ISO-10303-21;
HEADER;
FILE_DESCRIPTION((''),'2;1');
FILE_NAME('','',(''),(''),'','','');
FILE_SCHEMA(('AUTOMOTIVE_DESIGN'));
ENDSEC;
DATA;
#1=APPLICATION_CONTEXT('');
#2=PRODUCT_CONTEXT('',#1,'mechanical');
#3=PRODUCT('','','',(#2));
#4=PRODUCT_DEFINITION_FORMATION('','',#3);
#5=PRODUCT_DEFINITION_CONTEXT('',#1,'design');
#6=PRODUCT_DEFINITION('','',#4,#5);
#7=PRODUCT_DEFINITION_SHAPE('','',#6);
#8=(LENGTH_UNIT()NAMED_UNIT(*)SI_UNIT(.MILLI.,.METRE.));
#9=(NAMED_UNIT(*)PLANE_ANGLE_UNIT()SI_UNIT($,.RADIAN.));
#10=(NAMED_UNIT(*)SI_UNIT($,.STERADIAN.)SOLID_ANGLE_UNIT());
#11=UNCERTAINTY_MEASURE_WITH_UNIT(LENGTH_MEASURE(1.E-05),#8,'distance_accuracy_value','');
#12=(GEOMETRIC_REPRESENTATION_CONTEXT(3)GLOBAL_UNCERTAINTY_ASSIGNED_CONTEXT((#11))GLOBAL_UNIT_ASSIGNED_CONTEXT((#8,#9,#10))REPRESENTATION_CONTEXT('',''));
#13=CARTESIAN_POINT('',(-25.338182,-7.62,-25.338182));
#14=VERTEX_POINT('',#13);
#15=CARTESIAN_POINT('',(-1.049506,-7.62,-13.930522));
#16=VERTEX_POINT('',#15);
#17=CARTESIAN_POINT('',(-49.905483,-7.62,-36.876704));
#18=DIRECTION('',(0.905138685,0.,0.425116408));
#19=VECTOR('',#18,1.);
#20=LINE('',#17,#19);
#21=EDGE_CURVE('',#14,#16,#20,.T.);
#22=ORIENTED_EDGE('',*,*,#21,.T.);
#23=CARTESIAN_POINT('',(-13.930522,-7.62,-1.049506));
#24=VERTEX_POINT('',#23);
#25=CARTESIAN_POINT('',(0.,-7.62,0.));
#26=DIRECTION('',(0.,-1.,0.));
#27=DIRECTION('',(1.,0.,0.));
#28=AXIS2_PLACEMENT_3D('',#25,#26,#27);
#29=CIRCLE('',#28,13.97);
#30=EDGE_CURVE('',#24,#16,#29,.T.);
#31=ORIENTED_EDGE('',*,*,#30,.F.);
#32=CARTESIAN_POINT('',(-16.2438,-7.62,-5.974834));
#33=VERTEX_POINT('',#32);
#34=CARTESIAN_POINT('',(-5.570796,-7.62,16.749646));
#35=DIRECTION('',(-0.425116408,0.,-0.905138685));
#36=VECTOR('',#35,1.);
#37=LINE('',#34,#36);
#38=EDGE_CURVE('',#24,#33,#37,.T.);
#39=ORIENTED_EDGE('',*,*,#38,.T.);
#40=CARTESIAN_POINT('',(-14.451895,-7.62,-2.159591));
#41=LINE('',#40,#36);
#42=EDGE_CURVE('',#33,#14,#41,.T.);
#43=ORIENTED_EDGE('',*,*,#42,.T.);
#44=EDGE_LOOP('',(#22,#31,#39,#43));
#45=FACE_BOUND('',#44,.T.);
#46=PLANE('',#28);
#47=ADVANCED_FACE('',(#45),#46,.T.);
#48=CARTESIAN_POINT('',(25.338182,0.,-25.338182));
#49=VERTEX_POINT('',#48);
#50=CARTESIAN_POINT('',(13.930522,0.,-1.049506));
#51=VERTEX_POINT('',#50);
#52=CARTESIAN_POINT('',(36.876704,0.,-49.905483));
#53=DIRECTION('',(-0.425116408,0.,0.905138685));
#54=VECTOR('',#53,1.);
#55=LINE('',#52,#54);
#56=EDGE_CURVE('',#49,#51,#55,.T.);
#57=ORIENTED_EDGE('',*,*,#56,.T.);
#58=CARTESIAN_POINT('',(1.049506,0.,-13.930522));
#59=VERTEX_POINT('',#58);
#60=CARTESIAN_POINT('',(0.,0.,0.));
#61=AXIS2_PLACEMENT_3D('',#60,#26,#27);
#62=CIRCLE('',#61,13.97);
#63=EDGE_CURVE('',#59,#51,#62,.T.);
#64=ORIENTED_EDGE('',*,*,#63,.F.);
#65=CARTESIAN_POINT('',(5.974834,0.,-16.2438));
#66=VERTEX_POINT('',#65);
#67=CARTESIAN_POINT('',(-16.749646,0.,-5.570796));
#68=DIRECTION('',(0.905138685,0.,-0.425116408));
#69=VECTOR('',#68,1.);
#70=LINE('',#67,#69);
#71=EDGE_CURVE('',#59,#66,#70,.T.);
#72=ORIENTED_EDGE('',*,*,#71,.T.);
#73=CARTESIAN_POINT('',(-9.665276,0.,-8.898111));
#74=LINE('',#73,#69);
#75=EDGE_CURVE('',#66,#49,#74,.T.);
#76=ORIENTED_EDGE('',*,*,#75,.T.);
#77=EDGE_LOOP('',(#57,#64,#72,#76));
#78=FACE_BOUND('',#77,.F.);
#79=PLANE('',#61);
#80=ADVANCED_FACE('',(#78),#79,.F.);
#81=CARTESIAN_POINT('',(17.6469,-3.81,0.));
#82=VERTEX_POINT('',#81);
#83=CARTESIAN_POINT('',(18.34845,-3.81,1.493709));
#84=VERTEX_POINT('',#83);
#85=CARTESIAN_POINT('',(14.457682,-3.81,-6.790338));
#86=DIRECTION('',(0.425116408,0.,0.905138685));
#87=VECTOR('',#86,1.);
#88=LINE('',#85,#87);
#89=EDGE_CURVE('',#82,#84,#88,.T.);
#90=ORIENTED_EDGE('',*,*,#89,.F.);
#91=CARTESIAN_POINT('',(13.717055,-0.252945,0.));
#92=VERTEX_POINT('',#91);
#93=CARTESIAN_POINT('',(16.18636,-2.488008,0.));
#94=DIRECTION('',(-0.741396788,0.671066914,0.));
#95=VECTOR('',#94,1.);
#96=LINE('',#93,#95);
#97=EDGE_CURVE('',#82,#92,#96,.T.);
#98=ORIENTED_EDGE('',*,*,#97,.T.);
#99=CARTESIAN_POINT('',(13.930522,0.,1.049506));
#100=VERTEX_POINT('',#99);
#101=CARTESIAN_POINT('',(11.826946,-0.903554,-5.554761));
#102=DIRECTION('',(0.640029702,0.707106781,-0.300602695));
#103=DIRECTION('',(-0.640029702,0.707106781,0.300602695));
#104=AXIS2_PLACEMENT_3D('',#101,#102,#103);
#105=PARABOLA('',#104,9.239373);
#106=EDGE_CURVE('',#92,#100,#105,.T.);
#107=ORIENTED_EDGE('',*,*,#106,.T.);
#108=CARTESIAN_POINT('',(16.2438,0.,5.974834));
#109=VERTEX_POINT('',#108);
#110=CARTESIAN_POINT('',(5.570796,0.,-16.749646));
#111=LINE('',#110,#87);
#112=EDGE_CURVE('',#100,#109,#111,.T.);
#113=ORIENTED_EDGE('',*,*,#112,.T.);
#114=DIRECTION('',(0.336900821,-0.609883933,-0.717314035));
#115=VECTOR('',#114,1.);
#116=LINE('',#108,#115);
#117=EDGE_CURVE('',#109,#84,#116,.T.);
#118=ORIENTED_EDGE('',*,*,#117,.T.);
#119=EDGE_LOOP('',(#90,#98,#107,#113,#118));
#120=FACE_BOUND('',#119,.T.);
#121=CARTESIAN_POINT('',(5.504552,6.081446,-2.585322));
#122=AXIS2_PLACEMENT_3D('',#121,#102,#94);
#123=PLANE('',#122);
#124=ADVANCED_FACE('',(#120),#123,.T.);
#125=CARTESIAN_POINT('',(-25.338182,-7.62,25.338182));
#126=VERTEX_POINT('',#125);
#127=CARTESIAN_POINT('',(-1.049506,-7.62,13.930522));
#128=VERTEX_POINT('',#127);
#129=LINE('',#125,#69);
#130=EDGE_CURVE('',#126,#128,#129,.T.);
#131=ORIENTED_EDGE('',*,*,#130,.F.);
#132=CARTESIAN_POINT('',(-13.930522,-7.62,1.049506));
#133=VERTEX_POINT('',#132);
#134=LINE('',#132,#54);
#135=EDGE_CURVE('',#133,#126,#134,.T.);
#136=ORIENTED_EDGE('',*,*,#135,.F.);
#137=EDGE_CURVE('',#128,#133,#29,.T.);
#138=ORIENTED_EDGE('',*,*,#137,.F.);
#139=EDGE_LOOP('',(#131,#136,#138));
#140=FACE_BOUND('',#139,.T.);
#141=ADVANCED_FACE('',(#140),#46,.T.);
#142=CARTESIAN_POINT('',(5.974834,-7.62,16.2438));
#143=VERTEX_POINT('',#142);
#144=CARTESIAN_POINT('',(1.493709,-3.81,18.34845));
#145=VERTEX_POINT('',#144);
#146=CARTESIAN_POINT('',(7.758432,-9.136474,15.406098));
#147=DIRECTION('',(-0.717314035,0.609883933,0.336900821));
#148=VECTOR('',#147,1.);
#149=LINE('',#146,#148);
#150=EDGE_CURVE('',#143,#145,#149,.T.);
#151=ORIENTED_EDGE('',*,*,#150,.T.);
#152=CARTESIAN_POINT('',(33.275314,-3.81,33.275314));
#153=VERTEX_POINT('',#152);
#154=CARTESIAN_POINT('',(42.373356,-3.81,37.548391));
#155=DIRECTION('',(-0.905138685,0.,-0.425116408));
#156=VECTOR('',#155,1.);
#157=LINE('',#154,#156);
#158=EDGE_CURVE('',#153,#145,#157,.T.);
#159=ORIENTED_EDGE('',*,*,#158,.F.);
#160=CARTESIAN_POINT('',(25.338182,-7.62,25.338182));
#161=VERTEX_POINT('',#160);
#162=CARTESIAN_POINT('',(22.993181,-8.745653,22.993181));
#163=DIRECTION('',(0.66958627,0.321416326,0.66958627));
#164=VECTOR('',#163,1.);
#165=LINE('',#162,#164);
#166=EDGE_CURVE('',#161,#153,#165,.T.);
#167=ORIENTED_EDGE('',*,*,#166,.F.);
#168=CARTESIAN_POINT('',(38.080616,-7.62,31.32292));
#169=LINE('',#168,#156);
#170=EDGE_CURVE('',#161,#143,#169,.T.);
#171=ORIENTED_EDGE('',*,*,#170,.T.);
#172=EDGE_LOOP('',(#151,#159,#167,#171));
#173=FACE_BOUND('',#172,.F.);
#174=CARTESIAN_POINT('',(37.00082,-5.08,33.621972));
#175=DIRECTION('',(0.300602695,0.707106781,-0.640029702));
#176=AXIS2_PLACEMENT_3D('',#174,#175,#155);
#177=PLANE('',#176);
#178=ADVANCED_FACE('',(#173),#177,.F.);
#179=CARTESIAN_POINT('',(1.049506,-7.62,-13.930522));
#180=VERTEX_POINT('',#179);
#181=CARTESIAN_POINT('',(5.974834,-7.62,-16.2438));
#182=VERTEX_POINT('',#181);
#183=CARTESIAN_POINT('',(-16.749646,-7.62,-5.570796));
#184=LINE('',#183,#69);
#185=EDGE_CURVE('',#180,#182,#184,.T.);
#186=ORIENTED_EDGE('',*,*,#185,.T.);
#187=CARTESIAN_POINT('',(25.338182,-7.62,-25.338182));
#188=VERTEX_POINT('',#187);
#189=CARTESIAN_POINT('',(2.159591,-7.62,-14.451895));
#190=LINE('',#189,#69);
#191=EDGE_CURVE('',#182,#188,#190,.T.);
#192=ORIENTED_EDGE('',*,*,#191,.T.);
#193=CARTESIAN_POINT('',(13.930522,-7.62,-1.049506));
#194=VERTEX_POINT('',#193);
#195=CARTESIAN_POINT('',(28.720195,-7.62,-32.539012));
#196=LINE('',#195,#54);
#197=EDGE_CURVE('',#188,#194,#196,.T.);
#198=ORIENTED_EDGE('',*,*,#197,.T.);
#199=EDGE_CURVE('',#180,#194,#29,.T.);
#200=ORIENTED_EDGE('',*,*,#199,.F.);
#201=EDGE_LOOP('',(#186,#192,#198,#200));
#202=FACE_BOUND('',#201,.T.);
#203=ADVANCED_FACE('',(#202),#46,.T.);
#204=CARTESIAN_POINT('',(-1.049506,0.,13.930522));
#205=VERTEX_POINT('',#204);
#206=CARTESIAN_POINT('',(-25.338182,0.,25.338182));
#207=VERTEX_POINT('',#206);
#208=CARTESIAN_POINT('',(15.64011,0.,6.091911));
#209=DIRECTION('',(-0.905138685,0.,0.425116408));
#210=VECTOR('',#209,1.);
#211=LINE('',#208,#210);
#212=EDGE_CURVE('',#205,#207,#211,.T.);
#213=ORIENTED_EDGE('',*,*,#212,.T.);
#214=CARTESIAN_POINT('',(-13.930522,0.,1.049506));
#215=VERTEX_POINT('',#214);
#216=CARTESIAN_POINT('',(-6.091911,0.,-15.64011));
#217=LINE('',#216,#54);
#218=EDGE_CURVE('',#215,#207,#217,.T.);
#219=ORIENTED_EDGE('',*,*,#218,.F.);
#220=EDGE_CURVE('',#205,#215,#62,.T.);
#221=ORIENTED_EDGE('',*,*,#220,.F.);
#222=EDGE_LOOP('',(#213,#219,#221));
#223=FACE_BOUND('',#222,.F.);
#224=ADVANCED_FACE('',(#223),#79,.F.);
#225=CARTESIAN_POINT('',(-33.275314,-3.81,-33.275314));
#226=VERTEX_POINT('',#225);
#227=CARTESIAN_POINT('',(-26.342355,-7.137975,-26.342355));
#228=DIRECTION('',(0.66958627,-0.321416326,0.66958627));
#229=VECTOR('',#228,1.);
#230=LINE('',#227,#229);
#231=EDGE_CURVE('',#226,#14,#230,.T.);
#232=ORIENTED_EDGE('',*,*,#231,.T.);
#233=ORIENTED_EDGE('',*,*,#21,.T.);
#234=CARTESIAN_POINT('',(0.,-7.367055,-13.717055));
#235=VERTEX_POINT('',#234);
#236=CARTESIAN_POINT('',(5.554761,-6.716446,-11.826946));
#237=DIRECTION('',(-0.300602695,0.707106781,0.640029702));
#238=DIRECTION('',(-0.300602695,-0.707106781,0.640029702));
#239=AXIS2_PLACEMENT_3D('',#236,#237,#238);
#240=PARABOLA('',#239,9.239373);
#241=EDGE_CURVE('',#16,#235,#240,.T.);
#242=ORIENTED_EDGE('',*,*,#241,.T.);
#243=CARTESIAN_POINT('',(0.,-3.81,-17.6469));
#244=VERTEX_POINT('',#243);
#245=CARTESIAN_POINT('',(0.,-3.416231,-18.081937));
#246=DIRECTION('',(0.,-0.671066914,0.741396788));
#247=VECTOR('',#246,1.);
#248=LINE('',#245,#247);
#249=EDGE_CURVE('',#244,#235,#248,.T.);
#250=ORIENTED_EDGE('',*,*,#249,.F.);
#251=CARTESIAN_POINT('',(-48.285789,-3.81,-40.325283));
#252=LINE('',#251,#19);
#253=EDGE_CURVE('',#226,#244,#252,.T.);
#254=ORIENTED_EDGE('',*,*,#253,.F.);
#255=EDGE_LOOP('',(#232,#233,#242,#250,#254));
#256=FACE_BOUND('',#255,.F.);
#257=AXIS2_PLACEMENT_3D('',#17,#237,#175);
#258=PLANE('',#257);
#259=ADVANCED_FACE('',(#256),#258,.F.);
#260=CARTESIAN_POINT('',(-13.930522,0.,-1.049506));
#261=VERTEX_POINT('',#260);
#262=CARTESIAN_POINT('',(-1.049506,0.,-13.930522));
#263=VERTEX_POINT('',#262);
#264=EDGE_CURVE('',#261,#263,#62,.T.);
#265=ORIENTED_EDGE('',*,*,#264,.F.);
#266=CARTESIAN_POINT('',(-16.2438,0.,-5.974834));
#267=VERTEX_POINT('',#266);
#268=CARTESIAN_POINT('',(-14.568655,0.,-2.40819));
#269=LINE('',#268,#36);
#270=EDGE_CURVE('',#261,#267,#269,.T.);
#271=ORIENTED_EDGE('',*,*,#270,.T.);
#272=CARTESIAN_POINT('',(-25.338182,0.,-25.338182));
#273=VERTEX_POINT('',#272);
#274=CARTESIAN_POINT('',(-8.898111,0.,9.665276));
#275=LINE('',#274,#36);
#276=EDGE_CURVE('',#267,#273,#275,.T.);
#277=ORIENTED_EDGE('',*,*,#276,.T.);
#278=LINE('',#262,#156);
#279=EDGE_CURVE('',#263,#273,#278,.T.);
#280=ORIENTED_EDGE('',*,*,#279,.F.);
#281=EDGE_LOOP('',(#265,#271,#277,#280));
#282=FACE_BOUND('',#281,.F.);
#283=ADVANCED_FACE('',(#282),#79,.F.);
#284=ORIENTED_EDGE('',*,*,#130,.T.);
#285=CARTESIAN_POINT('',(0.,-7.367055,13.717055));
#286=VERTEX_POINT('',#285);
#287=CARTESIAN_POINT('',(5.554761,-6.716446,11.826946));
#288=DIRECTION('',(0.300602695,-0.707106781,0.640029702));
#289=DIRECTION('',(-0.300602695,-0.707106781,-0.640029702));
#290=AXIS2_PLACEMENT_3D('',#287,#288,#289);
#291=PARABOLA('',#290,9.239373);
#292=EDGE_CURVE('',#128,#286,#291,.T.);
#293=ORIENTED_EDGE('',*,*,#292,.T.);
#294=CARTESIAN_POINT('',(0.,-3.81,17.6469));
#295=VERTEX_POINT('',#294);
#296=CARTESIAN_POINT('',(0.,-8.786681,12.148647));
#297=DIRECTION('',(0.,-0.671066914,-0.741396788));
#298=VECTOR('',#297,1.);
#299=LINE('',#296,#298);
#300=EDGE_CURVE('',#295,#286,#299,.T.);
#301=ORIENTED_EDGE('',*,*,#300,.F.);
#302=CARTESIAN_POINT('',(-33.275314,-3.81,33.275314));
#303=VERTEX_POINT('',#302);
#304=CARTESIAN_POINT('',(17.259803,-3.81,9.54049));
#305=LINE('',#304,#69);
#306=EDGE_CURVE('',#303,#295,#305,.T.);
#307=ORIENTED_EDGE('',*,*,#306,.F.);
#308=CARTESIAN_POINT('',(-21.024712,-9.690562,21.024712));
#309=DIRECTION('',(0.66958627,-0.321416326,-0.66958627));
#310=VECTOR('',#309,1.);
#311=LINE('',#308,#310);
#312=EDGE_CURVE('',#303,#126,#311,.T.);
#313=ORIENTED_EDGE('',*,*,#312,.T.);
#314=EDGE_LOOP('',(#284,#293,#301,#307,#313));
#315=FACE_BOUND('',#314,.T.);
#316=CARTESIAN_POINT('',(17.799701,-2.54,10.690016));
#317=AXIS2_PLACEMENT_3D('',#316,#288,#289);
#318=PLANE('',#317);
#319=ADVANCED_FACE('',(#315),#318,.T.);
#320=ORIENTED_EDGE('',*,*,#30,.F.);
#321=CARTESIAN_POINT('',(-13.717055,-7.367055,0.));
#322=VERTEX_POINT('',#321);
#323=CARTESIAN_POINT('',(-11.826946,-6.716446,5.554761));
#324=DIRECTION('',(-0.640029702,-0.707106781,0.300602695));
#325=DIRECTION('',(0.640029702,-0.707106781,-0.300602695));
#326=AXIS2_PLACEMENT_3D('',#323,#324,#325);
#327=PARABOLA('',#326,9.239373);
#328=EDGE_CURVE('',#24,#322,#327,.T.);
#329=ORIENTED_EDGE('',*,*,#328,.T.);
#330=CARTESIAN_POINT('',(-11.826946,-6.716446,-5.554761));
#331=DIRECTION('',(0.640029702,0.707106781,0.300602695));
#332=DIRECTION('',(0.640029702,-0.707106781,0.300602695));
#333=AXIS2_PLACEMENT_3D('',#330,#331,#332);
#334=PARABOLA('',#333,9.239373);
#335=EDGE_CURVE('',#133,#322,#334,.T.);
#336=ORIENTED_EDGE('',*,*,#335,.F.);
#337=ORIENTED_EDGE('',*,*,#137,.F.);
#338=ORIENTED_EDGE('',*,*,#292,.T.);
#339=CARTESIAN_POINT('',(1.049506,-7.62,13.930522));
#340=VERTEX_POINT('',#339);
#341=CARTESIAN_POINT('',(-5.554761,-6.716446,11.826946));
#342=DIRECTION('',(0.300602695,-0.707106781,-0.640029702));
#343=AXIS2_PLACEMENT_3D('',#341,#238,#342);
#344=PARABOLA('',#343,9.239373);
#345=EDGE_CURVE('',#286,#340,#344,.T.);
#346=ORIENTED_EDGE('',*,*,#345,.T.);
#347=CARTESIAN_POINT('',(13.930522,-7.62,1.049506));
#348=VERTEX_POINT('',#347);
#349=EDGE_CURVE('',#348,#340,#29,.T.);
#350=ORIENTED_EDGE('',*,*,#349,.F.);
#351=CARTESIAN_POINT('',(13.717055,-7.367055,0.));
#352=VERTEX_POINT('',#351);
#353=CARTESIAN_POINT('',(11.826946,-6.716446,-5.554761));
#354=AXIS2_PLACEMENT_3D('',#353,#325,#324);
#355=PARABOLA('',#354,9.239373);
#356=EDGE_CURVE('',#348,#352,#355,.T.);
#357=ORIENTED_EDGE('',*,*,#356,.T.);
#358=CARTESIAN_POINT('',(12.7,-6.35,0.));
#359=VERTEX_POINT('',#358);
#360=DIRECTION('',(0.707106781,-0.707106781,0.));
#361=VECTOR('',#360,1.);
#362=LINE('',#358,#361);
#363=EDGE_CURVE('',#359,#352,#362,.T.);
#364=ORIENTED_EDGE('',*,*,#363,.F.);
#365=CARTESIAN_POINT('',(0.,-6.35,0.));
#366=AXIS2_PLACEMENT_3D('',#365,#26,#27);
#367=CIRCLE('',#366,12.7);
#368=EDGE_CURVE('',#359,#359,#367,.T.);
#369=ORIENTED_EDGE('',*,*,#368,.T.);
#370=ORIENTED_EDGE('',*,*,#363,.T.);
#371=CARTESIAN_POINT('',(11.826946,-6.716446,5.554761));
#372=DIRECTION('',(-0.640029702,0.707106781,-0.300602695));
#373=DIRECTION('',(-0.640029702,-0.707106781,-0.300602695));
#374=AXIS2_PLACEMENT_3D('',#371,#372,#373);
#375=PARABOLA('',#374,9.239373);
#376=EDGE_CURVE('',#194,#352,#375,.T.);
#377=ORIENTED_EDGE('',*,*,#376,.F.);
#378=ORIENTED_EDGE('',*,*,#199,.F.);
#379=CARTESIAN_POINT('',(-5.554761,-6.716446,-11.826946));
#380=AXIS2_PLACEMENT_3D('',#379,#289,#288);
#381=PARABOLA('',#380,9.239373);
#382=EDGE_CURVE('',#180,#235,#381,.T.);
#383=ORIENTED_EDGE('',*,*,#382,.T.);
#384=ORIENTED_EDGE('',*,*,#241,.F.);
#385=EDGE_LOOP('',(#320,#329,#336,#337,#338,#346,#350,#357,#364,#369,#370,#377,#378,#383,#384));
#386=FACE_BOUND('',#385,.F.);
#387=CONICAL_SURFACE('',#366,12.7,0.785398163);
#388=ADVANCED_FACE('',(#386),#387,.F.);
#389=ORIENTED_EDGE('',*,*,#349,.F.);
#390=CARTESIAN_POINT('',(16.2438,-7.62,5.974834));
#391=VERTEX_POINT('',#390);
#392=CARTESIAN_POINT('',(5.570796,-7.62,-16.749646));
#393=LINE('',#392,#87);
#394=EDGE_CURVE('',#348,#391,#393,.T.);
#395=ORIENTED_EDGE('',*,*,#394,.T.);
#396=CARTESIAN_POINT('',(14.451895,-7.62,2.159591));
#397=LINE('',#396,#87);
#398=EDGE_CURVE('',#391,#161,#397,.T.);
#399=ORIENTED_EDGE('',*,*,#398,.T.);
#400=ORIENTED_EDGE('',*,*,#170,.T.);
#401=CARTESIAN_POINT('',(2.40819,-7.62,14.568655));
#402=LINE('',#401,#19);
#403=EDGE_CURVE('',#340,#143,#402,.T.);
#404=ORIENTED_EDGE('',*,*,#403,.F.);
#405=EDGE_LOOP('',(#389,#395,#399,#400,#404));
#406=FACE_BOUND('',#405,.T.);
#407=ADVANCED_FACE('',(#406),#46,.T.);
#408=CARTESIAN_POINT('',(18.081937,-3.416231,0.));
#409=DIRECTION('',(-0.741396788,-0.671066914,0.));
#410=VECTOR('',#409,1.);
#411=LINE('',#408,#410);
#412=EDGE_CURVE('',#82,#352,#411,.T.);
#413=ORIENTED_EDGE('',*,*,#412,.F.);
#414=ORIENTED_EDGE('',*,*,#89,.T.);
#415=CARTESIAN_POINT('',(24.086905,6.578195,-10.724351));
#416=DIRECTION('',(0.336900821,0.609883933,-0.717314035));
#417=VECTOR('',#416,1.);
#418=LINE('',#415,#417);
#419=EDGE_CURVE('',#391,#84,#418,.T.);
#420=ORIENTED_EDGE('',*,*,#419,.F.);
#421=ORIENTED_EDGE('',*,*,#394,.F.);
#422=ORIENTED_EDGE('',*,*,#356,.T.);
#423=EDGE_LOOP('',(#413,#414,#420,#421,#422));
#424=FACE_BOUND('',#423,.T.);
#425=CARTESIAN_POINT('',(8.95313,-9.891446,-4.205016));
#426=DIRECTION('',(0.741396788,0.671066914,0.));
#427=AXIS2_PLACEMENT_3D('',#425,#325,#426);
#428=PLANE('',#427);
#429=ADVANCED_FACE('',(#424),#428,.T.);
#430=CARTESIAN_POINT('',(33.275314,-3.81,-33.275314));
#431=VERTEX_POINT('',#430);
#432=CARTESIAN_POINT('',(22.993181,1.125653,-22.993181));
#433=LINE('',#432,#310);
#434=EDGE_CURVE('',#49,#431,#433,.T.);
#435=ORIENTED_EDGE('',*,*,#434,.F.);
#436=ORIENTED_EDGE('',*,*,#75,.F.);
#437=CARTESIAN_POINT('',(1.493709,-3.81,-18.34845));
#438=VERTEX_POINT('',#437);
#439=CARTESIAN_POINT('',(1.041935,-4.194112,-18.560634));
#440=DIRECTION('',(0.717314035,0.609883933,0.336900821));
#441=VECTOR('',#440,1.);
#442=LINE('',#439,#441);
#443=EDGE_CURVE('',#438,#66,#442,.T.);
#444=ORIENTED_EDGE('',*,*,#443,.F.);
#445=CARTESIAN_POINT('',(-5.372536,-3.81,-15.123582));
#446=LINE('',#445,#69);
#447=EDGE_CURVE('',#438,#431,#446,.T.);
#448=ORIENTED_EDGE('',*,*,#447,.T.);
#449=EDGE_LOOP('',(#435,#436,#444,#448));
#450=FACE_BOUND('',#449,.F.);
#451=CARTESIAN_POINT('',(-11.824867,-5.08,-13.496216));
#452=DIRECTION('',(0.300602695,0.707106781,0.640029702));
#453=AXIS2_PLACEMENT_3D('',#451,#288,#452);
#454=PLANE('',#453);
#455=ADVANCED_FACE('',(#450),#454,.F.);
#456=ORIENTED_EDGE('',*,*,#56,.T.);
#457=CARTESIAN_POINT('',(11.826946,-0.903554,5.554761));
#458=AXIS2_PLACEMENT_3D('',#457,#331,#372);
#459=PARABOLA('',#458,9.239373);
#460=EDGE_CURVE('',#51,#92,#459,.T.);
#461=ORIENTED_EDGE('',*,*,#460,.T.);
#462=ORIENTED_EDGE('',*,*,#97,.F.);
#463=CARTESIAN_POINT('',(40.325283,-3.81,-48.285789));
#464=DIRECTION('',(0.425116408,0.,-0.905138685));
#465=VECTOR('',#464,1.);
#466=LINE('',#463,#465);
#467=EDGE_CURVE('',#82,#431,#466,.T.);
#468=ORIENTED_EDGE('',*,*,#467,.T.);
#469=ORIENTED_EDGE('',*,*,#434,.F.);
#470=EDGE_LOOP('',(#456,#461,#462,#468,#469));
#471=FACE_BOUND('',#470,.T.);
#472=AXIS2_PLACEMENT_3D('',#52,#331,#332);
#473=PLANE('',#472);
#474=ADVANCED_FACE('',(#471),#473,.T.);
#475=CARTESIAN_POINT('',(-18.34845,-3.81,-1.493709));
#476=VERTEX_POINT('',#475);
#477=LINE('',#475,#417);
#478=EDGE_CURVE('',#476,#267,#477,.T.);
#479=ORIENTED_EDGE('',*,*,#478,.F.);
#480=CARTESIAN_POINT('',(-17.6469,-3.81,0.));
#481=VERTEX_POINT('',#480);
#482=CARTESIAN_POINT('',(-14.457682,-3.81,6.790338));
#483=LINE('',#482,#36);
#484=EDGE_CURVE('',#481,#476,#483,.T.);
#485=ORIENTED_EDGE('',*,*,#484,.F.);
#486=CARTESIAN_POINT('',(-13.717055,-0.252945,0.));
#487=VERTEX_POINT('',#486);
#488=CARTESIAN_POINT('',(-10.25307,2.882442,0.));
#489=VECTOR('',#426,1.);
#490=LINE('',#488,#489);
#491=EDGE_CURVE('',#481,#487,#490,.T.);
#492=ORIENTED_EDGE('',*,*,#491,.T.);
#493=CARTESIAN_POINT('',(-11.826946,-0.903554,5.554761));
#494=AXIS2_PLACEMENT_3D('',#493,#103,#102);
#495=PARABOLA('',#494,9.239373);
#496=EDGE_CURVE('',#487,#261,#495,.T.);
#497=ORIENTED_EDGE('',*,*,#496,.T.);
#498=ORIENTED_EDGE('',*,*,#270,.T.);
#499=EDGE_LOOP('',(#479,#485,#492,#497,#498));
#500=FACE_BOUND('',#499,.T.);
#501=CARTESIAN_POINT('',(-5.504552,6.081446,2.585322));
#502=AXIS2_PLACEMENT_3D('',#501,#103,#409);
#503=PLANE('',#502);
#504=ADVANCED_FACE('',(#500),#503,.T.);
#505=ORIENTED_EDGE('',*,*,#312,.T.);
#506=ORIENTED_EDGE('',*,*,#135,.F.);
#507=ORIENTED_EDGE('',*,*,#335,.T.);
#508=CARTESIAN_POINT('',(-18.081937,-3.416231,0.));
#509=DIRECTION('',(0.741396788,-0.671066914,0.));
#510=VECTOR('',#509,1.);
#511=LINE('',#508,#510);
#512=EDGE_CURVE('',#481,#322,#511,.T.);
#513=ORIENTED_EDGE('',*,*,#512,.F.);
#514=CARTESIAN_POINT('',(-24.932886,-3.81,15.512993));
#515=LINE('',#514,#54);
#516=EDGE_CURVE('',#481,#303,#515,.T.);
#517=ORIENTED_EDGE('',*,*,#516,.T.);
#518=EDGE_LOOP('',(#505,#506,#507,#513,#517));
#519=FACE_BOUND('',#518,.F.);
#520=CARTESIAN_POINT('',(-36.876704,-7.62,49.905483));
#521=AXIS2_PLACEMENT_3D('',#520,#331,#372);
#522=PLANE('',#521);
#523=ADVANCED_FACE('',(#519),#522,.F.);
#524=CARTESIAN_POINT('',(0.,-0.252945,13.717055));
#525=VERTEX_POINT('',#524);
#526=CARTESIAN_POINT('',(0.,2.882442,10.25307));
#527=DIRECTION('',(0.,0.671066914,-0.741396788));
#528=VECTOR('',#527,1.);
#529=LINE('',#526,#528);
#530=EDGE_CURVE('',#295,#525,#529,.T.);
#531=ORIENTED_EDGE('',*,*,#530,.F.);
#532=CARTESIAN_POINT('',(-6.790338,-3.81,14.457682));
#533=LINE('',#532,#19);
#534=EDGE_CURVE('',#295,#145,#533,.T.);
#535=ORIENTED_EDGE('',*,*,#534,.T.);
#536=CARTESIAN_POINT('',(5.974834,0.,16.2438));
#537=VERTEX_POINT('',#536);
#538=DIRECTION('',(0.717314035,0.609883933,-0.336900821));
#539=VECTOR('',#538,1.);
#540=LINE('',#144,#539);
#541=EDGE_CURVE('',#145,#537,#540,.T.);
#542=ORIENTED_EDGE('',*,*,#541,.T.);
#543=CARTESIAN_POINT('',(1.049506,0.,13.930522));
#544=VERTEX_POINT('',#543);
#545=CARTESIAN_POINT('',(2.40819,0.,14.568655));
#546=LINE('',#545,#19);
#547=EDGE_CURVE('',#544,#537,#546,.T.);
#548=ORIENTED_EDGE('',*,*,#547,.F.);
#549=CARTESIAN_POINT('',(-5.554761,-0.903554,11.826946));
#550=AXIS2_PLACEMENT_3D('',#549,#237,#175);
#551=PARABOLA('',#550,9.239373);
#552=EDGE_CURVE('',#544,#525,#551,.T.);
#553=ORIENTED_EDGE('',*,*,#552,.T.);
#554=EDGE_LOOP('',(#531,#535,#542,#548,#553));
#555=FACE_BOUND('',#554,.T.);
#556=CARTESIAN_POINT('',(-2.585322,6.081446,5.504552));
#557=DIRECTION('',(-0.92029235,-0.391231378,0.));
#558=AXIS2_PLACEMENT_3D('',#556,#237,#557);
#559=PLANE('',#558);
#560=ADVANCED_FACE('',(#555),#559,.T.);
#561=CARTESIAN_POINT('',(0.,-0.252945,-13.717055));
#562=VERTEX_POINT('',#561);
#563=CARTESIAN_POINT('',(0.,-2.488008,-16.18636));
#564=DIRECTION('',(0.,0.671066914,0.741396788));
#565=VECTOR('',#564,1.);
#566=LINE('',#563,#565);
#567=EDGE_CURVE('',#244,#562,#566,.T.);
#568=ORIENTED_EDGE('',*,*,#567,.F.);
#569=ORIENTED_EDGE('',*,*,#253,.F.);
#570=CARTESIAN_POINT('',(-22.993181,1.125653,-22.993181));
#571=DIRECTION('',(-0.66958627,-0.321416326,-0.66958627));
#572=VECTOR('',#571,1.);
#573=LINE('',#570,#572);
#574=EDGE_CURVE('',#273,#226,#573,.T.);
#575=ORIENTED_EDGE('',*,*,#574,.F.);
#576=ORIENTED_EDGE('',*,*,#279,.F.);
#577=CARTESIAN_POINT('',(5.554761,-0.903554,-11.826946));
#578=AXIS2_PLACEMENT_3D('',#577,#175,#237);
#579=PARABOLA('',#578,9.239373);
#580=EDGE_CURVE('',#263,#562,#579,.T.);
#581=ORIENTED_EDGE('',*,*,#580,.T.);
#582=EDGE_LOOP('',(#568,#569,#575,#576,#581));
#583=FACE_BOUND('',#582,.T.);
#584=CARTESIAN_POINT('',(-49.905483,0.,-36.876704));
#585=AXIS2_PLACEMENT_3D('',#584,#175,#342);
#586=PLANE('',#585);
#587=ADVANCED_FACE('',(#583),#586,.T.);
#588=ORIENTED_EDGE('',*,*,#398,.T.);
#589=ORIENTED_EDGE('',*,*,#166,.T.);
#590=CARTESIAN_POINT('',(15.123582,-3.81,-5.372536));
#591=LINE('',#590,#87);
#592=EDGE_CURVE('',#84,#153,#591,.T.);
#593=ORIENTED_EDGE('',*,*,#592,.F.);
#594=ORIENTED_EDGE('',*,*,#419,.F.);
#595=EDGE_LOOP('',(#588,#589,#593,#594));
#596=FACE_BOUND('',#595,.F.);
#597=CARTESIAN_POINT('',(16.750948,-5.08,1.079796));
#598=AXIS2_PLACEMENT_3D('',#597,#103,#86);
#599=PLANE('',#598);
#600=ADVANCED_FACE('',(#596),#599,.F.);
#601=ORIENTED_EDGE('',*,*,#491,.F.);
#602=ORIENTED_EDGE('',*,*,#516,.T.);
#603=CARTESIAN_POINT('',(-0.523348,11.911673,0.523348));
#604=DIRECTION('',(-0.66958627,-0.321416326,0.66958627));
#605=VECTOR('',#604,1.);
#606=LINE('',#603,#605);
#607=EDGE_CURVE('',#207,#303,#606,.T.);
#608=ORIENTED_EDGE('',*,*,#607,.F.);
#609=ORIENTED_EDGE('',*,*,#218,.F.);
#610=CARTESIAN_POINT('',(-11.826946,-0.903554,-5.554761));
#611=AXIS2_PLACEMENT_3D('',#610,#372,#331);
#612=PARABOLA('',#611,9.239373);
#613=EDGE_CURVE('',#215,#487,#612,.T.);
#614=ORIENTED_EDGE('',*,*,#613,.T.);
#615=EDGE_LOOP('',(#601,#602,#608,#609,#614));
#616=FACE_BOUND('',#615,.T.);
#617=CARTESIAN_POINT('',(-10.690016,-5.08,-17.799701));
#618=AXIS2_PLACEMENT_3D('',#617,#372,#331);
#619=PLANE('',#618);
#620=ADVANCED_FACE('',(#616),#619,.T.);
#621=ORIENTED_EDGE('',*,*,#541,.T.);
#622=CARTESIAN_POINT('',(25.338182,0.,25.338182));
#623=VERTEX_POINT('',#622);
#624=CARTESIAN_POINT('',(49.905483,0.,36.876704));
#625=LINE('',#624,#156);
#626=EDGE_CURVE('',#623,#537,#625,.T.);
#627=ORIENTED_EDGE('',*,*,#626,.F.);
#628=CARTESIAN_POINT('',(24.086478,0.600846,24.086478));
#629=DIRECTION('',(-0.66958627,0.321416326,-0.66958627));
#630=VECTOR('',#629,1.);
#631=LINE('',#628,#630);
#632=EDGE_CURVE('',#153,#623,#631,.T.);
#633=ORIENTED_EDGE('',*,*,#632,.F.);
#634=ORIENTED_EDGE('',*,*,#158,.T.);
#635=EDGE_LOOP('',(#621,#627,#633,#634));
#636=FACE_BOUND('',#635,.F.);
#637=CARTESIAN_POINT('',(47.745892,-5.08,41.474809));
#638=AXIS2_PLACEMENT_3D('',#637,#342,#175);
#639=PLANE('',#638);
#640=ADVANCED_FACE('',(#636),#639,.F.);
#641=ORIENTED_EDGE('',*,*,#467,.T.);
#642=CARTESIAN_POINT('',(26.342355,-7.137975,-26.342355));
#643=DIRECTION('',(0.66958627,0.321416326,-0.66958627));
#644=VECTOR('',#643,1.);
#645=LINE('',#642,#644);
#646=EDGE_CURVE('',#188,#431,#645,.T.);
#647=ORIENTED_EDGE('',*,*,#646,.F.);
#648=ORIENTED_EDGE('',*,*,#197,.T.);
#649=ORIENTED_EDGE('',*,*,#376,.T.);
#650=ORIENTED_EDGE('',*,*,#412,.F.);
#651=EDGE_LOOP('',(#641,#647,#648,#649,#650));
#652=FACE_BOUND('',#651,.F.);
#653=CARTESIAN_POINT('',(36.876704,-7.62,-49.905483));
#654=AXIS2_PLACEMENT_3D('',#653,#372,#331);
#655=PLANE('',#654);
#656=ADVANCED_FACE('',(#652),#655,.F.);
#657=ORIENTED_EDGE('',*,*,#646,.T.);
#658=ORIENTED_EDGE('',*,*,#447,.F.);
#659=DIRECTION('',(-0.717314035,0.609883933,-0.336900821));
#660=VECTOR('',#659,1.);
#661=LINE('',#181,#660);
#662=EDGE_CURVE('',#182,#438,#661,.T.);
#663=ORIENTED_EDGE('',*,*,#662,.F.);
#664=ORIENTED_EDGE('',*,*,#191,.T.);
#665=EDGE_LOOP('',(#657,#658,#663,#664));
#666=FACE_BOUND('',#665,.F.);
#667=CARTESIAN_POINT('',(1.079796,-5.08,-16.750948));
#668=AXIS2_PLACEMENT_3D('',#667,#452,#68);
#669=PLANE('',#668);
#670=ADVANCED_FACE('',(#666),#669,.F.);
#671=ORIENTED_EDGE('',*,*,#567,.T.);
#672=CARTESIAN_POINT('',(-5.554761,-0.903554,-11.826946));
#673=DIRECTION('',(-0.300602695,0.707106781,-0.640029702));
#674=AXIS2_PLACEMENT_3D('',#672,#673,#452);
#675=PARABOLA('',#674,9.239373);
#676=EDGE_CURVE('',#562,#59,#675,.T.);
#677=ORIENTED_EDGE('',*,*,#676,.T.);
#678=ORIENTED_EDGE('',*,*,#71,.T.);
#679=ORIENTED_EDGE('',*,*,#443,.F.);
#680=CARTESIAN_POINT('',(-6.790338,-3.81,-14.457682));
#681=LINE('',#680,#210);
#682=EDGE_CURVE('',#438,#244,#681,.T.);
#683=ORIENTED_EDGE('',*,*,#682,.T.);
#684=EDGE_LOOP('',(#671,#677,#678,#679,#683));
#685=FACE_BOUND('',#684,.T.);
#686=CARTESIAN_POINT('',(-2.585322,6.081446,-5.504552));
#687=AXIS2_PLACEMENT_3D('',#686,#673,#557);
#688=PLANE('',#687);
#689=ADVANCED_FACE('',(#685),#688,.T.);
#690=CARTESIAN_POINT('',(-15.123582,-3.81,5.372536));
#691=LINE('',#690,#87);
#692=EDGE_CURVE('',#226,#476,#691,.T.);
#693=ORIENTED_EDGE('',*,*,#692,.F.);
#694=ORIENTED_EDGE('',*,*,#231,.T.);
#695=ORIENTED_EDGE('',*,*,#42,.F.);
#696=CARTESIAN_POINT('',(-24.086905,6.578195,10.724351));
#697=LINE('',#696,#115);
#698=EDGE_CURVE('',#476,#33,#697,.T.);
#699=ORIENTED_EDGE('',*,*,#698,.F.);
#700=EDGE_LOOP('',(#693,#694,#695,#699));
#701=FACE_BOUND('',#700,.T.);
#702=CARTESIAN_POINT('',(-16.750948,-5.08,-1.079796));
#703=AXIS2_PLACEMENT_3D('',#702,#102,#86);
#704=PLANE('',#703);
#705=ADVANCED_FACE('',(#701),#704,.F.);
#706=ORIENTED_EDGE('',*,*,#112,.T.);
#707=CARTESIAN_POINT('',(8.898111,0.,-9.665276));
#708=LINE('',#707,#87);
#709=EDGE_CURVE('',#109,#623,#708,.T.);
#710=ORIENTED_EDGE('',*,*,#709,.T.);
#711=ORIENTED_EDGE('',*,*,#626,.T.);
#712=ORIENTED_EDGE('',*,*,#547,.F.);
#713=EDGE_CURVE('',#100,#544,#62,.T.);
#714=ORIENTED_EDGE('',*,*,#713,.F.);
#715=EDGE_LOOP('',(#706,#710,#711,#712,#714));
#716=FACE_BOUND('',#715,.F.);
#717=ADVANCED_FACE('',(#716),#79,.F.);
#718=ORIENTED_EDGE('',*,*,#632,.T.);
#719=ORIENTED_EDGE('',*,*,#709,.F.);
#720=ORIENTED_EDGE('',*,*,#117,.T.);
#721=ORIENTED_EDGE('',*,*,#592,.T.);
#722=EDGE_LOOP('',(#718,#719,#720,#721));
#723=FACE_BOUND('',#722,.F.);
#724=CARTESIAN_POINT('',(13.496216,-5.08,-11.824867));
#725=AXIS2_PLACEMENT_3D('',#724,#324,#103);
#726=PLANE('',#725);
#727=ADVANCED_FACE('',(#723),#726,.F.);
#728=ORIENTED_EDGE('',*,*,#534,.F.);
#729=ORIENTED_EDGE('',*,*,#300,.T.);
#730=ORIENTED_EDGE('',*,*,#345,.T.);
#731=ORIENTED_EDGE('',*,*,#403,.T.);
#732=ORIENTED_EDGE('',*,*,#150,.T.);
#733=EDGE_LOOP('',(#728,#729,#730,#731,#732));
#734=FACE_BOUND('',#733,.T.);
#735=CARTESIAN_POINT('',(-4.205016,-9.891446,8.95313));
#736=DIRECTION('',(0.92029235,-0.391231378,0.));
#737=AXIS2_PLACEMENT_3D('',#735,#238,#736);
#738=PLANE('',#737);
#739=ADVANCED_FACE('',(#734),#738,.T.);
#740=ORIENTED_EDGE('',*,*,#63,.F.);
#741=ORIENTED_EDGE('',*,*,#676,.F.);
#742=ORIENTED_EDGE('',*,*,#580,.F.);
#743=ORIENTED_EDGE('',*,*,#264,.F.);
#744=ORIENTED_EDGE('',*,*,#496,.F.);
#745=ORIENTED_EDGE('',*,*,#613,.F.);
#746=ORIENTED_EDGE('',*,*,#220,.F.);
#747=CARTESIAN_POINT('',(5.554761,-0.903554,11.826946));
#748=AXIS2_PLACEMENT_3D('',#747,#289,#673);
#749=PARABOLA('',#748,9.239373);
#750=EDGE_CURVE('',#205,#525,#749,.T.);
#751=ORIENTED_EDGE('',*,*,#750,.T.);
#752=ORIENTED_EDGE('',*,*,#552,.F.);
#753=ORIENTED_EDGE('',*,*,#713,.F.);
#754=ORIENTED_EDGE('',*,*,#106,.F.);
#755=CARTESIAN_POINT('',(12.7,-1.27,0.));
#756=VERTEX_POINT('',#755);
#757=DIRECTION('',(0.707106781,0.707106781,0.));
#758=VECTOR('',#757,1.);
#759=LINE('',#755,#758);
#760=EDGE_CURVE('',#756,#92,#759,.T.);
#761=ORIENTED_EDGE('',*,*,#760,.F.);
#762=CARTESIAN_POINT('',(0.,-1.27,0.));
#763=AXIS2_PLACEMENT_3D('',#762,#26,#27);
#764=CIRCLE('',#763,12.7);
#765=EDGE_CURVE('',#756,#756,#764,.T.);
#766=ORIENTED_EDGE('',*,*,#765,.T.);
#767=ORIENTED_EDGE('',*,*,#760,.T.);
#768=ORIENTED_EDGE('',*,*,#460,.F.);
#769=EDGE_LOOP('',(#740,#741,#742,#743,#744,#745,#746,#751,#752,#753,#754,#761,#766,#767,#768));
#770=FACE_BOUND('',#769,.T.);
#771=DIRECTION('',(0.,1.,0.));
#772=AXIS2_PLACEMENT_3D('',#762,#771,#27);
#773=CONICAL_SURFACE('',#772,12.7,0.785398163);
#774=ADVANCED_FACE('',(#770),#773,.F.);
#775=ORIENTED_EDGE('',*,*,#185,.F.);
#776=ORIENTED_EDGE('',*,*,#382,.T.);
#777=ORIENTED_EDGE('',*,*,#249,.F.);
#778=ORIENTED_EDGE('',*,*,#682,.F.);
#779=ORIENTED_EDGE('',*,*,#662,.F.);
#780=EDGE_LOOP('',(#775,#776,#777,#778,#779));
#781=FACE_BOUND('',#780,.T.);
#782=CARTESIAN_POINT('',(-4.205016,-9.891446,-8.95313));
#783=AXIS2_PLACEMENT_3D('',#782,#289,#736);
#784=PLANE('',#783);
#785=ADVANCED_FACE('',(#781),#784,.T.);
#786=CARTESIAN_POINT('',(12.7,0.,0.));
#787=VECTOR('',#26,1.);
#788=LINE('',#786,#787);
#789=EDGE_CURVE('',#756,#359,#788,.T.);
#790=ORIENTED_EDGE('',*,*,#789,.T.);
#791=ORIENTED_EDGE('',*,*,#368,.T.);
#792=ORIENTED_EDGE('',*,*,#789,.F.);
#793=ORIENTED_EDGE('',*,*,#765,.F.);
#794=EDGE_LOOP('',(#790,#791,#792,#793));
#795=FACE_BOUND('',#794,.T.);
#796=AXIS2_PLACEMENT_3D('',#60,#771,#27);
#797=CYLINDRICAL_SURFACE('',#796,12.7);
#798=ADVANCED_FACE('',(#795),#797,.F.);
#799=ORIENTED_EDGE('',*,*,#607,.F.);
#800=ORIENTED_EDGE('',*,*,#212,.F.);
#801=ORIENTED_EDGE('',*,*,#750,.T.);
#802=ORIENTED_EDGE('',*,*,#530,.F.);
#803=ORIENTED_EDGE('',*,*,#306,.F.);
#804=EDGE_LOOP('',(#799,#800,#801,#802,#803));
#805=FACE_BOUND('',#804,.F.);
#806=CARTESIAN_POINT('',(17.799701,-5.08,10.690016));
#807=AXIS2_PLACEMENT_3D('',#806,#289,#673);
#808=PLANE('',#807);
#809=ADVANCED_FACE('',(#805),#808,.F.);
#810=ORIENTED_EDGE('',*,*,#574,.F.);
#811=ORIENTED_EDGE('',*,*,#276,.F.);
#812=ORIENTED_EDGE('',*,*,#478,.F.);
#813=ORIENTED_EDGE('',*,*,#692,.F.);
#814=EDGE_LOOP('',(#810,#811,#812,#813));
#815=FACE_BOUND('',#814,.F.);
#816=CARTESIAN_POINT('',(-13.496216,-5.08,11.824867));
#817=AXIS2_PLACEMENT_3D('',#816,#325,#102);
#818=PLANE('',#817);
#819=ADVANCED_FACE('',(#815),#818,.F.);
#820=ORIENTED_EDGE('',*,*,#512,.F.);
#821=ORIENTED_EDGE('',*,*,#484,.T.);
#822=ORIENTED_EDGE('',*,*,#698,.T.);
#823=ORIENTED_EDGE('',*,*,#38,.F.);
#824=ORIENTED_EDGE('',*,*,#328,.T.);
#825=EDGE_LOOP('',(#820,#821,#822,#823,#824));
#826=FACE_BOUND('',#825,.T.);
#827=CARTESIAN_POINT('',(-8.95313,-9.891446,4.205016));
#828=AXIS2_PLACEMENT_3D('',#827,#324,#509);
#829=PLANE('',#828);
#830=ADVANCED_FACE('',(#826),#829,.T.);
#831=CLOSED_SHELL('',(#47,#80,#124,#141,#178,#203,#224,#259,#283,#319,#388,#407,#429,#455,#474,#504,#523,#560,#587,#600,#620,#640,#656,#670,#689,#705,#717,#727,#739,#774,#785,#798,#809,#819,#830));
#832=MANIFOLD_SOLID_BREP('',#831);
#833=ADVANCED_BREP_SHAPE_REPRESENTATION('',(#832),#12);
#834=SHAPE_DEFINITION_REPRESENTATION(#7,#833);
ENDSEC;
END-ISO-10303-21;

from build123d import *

# Parameters (mm, degrees)
F0_R          = 12.7
F1_DEPTH      = 7.62
F2_SIZE       = 1.27
F3_SIZE       = 1.27
F4_SIZE       = 5.08
F5_T4_DEPTH   = 65.8139573625
F6_SIZE       = 5.08
F7_T4_DEPTH   = 57.8584590231
F8_T4_DEPTH   = 72.4149723957
F8_T10_DEPTH  = 72.4149723957
F8_T16_DEPTH  = 72.4149723957
F9_T4_DEPTH   = 72.4149723957
F10_SIZE      = 5.08
F11_T4_DEPTH  = 57.8584590231
F12_T4_DEPTH  = 72.4149723957
F12_T10_DEPTH = 72.4149723957
F12_T16_DEPTH = 72.4149723957
F13_T4_DEPTH  = 72.4149723957
F14_SIZE      = 5.08
F15_T4_DEPTH  = 57.8584590231
F16_T4_DEPTH  = 72.4149723957
F16_T10_DEPTH = 72.4149723957
F16_T16_DEPTH = 72.4149723957
F17_T4_DEPTH  = 72.4149723957
F18_T4_DEPTH  = 64.4594740563
F18_T10_DEPTH = 64.4594740563
F18_T16_DEPTH = 64.4594740563
F19_T4_DEPTH  = 64.4594740563


# Not quite as in the source:
# - a fillet or chamfer that OpenCascade refuses, or shapes differently, is made with other operations: its cross-section is extruded or revolved along the edge and cut away or added


with BuildPart() as f1:
    # F0 (on Front) → F1 (new body)
    with BuildSketch(Plane.XZ):
        Polygon((-19.05, 0), (-35.9210244843, -35.9210244843), (0, -19.05), (35.9210244843, -35.9210244843), (19.05, 0), (35.9210244843, 35.9210244843), (0, 19.05), (-35.9210244843, 35.9210244843), align=None)
        Circle(F0_R, mode=Mode.SUBTRACT)
    extrude(amount=F1_DEPTH)

    # F2
    f2_edges = [f1.edges().sort_by_distance(p)[0] for p in [
        (-12.7, -7.62, 0),
    ]]
    chamfer(f2_edges, length=F2_SIZE)

    # F3
    f3_edges = [f1.edges().sort_by_distance(p)[0] for p in [
        (-12.7, 0, 0),
    ]]
    chamfer(f3_edges, length=F3_SIZE)

    # F4
    f4_edges = [f1.edges().sort_by_distance(p)[0] for p in [
        (17.960512, -7.62, 27.485512),
    ]]
    chamfer(f4_edges, length=F4_SIZE)

    # F5: chamfer of 5.08 on 1 edges, made by hand


with BuildPart() as f5_tool2:
    # F5_s3 → F5_t4 (new body)
    with BuildSketch(Plane(origin=(55.0761279539, 0, 25.8676002856), x_dir=(0, 1, 0), z_dir=(-0.9051386851, 0, -0.4251164085))):
        Polygon((-5.08, -17.2428919509), (0, -12.1628919509), (0, -17.2428919509), align=None)
    extrude(amount=F5_T4_DEPTH)

    split(bisect_by=Plane(origin=(7.330236298, 0, 15.6072085475), x_dir=(0, 1, 0), z_dir=(0.4251164085, 0, 0.9051386851)), keep=Keep.TOP)


with BuildPart() as f1_1:
    add(f1.part)

    # F5_t1: cut F5_tool2
    add(f5_tool2.part, mode=Mode.SUBTRACT)

    # F6
    f6_edges = [f1_1.edges().sort_by_distance(p)[0] for p in [
        (25.794506, -7.62, 14.360098),
    ]]
    chamfer(f6_edges, length=F6_SIZE)

    # F7: chamfer of 5.08 on 1 edges, made by hand


with BuildPart() as f7_tool2:
    # F7_s3 → F7_t4 (new body)
    with BuildSketch(Plane(origin=(-2.1109928963, 0, -4.4946308736), x_dir=(0, 1, 0), z_dir=(0.4251164085, 0, 0.9051386851))):
        Polygon((-5.08, -17.2428919509), (0, -12.1628919509), (0, -17.2428919509), align=None)
    extrude(amount=F7_T4_DEPTH)

    split(bisect_by=Plane(origin=(15.6072085475, 0, 7.330236298), x_dir=(0, 1, 0), z_dir=(0.9051386851, 0, 0.4251164085)), keep=Keep.TOP)


with BuildPart() as f1_2:
    add(f1_1.part)

    # F7_t1: cut F7_tool2
    add(f7_tool2.part, mode=Mode.SUBTRACT)

    # F8: chamfer of 5.08 on 1 edges, made by hand


with BuildPart() as f8_tool2:
    # F8_s3 → F8_t4 (new body)
    with BuildSketch(Plane(origin=(25.8676002856, 0, -55.0761279539), x_dir=(0, 1, 0), z_dir=(-0.4251164085, 0, 0.9051386851))):
        Polygon((-7.62, -12.1628919509), (-2.54, -17.2428919509), (-7.62, -17.2428919509), align=None)
    extrude(amount=F8_T4_DEPTH)

    split(bisect_by=Plane(origin=(5.5045520136, 6.0814459754, -2.5853224715), x_dir=(-0.741396788, 0.6710669138, 0), z_dir=(0.6400297021, 0.7071067812, -0.3006026952)), keep=Keep.TOP)

    split(bisect_by=Plane(origin=(8.9531304038, -9.8914459754, -4.2050159878), x_dir=(0.741396788, 0.6710669138, 0), z_dir=(0.6400297021, -0.7071067812, -0.3006026952)), keep=Keep.TOP)


with BuildPart() as f1_3:
    add(f1_2.part)

    # F8_t1: cut F8_tool2
    add(f8_tool2.part, mode=Mode.SUBTRACT)


with BuildPart() as f8_tool8:
    # F8_s9 → F8_t10 (new body)
    with BuildSketch(Plane(origin=(25.8676002856, 0, -55.0761279539), x_dir=(0, 1, 0), z_dir=(-0.4251164085, 0, 0.9051386851))):
        Polygon((-7.62, -12.1628919509), (-2.54, -17.2428919509), (-7.62, -17.2428919509), align=None)
    extrude(amount=F8_T10_DEPTH)

    split(bisect_by=Plane(origin=(5.5045520136, 6.0814459754, -2.5853224715), x_dir=(-0.741396788, 0.6710669138, 0), z_dir=(0.6400297021, 0.7071067812, -0.3006026952)), keep=Keep.TOP)

    split(bisect_by=Plane(origin=(8.9531304038, -9.8914459754, -4.2050159878), x_dir=(-0.741396788, -0.6710669138, 0), z_dir=(-0.6400297021, 0.7071067812, 0.3006026952)), keep=Keep.TOP)


with BuildPart() as f1_4:
    add(f1_3.part)

    # F8_t7: cut F8_tool8
    add(f8_tool8.part, mode=Mode.SUBTRACT)


with BuildPart() as f8_tool14:
    # F8_s15 → F8_t16 (new body)
    with BuildSketch(Plane(origin=(25.8676002856, 0, -55.0761279539), x_dir=(0, 1, 0), z_dir=(-0.4251164085, 0, 0.9051386851))):
        Polygon((-7.62, -12.1628919509), (-2.54, -17.2428919509), (-7.62, -17.2428919509), align=None)
    extrude(amount=F8_T16_DEPTH)

    split(bisect_by=Plane(origin=(5.5045520136, 6.0814459754, -2.5853224715), x_dir=(0.741396788, -0.6710669138, 0), z_dir=(-0.6400297021, -0.7071067812, 0.3006026952)), keep=Keep.TOP)

    split(bisect_by=Plane(origin=(8.9531304038, -9.8914459754, -4.2050159878), x_dir=(0.741396788, 0.6710669138, 0), z_dir=(0.6400297021, -0.7071067812, -0.3006026952)), keep=Keep.TOP)


with BuildPart() as f1_5:
    add(f1_4.part)

    # F8_t13: cut F8_tool14
    add(f8_tool14.part, mode=Mode.SUBTRACT)

    # F9: chamfer of 5.08 on 1 edges, made by hand


with BuildPart() as f9_tool2:
    # F9_s3 → F9_t4 (new body)
    with BuildSketch(Plane(origin=(25.8676002856, 0, -55.0761279539), x_dir=(0, 1, 0), z_dir=(-0.4251164085, 0, 0.9051386851))):
        Polygon((0, -12.1628919509), (-5.08, -17.2428919509), (0, -17.2428919509), align=None)
    extrude(amount=F9_T4_DEPTH)

    split(bisect_by=Plane(origin=(5.5045520136, 6.0814459754, -2.5853224715), x_dir=(-0.741396788, 0.6710669138, 0), z_dir=(0.6400297021, 0.7071067812, -0.3006026952)), keep=Keep.TOP)


with BuildPart() as f1_6:
    add(f1_5.part)

    # F9_t1: cut F9_tool2
    add(f9_tool2.part, mode=Mode.SUBTRACT)

    # F10
    f10_edges = [f1_6.edges().sort_by_distance(p)[0] for p in [
        (14.360098, -7.62, -25.794506),
    ]]
    chamfer(f10_edges, length=F10_SIZE)

    # F11: chamfer of 5.08 on 1 edges, made by hand


with BuildPart() as f11_tool2:
    # F11_s3 → F11_t4 (new body)
    with BuildSketch(Plane(origin=(-4.4946308736, 0, 2.1109928963), x_dir=(0, 1, 0), z_dir=(0.9051386851, 0, -0.4251164085))):
        Polygon((-5.08, -17.2428919509), (0, -12.1628919509), (0, -17.2428919509), align=None)
    extrude(amount=F11_T4_DEPTH)

    split(bisect_by=Plane(origin=(7.330236298, 0, -15.6072085475), x_dir=(0, 1, 0), z_dir=(0.4251164085, 0, -0.9051386851)), keep=Keep.TOP)


with BuildPart() as f1_7:
    add(f1_6.part)

    # F11_t1: cut F11_tool2
    add(f11_tool2.part, mode=Mode.SUBTRACT)

    # F12: chamfer of 5.08 on 1 edges, made by hand


with BuildPart() as f12_tool2:
    # F12_s3 → F12_t4 (new body)
    with BuildSketch(Plane(origin=(-55.0761279539, 0, -25.8676002856), x_dir=(0, 1, 0), z_dir=(0.9051386851, 0, 0.4251164085))):
        Polygon((0, -12.1628919509), (-5.08, -17.2428919509), (0, -17.2428919509), align=None)
    extrude(amount=F12_T4_DEPTH)

    split(bisect_by=Plane(origin=(-4.2050159878, -9.8914459754, -8.9531304038), x_dir=(0.9202923495, -0.3912313784, 0), z_dir=(-0.3006026952, -0.7071067812, -0.6400297021)), keep=Keep.TOP)

    split(bisect_by=Plane(origin=(-2.5853224715, 6.0814459755, -5.5045520136), x_dir=(-0.9202923495, -0.3912313784, 0), z_dir=(-0.3006026952, 0.7071067812, -0.6400297021)), keep=Keep.TOP)


with BuildPart() as f1_8:
    add(f1_7.part)

    # F12_t1: cut F12_tool2
    add(f12_tool2.part, mode=Mode.SUBTRACT)


with BuildPart() as f12_tool8:
    # F12_s9 → F12_t10 (new body)
    with BuildSketch(Plane(origin=(-55.0761279539, 0, -25.8676002856), x_dir=(0, 1, 0), z_dir=(0.9051386851, 0, 0.4251164085))):
        Polygon((0, -12.1628919509), (-5.08, -17.2428919509), (0, -17.2428919509), align=None)
    extrude(amount=F12_T10_DEPTH)

    split(bisect_by=Plane(origin=(-4.2050159878, -9.8914459754, -8.9531304038), x_dir=(0.9202923495, -0.3912313784, 0), z_dir=(-0.3006026952, -0.7071067812, -0.6400297021)), keep=Keep.TOP)

    split(bisect_by=Plane(origin=(-2.5853224715, 6.0814459755, -5.5045520136), x_dir=(0.9202923495, 0.3912313784, 0), z_dir=(0.3006026952, -0.7071067812, 0.6400297021)), keep=Keep.TOP)


with BuildPart() as f1_9:
    add(f1_8.part)

    # F12_t7: cut F12_tool8
    add(f12_tool8.part, mode=Mode.SUBTRACT)


with BuildPart() as f12_tool14:
    # F12_s15 → F12_t16 (new body)
    with BuildSketch(Plane(origin=(-55.0761279539, 0, -25.8676002856), x_dir=(0, 1, 0), z_dir=(0.9051386851, 0, 0.4251164085))):
        Polygon((0, -12.1628919509), (-5.08, -17.2428919509), (0, -17.2428919509), align=None)
    extrude(amount=F12_T16_DEPTH)

    split(bisect_by=Plane(origin=(-4.2050159878, -9.8914459754, -8.9531304038), x_dir=(-0.9202923495, 0.3912313784, 0), z_dir=(0.3006026952, 0.7071067812, 0.6400297021)), keep=Keep.TOP)

    split(bisect_by=Plane(origin=(-2.5853224715, 6.0814459755, -5.5045520136), x_dir=(-0.9202923495, -0.3912313784, 0), z_dir=(-0.3006026952, 0.7071067812, -0.6400297021)), keep=Keep.TOP)


with BuildPart() as f1_10:
    add(f1_9.part)

    # F12_t13: cut F12_tool14
    add(f12_tool14.part, mode=Mode.SUBTRACT)

    # F13: chamfer of 5.08 on 1 edges, made by hand


with BuildPart() as f13_tool2:
    # F13_s3 → F13_t4 (new body)
    with BuildSketch(Plane(origin=(-55.0761279539, 0, -25.8676002856), x_dir=(0, 1, 0), z_dir=(0.9051386851, 0, 0.4251164085))):
        Polygon((-7.62, -12.1628919509), (-2.54, -17.2428919509), (-7.62, -17.2428919509), align=None)
    extrude(amount=F13_T4_DEPTH)

    split(bisect_by=Plane(origin=(-4.2050159878, -9.8914459754, -8.9531304038), x_dir=(0.9202923495, -0.3912313784, 0), z_dir=(-0.3006026952, -0.7071067812, -0.6400297021)), keep=Keep.TOP)


with BuildPart() as f1_11:
    add(f1_10.part)

    # F13_t1: cut F13_tool2
    add(f13_tool2.part, mode=Mode.SUBTRACT)

    # F14
    f14_edges = [f1_11.edges().sort_by_distance(p)[0] for p in [
        (-25.794506, -7.62, -14.360098),
    ]]
    chamfer(f14_edges, length=F14_SIZE)

    # F15: chamfer of 5.08 on 1 edges, made by hand


with BuildPart() as f15_tool2:
    # F15_s3 → F15_t4 (new body)
    with BuildSketch(Plane(origin=(2.1109928963, 0, 4.4946308736), x_dir=(0, 1, 0), z_dir=(-0.4251164085, 0, -0.9051386851))):
        Polygon((-5.08, -17.2428919509), (0, -12.1628919509), (0, -17.2428919509), align=None)
    extrude(amount=F15_T4_DEPTH)

    split(bisect_by=Plane(origin=(-15.6072085475, 0, -7.330236298), x_dir=(0, 1, 0), z_dir=(-0.9051386851, 0, -0.4251164085)), keep=Keep.TOP)


with BuildPart() as f1_12:
    add(f1_11.part)

    # F15_t1: cut F15_tool2
    add(f15_tool2.part, mode=Mode.SUBTRACT)

    # F16: chamfer of 5.08 on 1 edges, made by hand


with BuildPart() as f16_tool2:
    # F16_s3 → F16_t4 (new body)
    with BuildSketch(Plane(origin=(-25.8676002856, 0, 55.0761279539), x_dir=(0, 1, 0), z_dir=(0.4251164085, 0, -0.9051386851))):
        Polygon((-7.62, -12.1628919509), (-2.54, -17.2428919509), (-7.62, -17.2428919509), align=None)
    extrude(amount=F16_T4_DEPTH)

    split(bisect_by=Plane(origin=(-5.5045520136, 6.0814459754, 2.5853224715), x_dir=(-0.741396788, -0.6710669138, 0), z_dir=(-0.6400297021, 0.7071067812, 0.3006026952)), keep=Keep.TOP)

    split(bisect_by=Plane(origin=(-8.9531304038, -9.8914459754, 4.2050159878), x_dir=(0.741396788, -0.6710669138, 0), z_dir=(-0.6400297021, -0.7071067812, 0.3006026952)), keep=Keep.TOP)


with BuildPart() as f1_13:
    add(f1_12.part)

    # F16_t1: cut F16_tool2
    add(f16_tool2.part, mode=Mode.SUBTRACT)


with BuildPart() as f16_tool8:
    # F16_s9 → F16_t10 (new body)
    with BuildSketch(Plane(origin=(-25.8676002856, 0, 55.0761279539), x_dir=(0, 1, 0), z_dir=(0.4251164085, 0, -0.9051386851))):
        Polygon((-7.62, -12.1628919509), (-2.54, -17.2428919509), (-7.62, -17.2428919509), align=None)
    extrude(amount=F16_T10_DEPTH)

    split(bisect_by=Plane(origin=(-5.5045520136, 6.0814459754, 2.5853224715), x_dir=(-0.741396788, -0.6710669138, 0), z_dir=(-0.6400297021, 0.7071067812, 0.3006026952)), keep=Keep.TOP)

    split(bisect_by=Plane(origin=(-8.9531304038, -9.8914459754, 4.2050159878), x_dir=(-0.741396788, 0.6710669138, 0), z_dir=(0.6400297021, 0.7071067812, -0.3006026952)), keep=Keep.TOP)


with BuildPart() as f1_14:
    add(f1_13.part)

    # F16_t7: cut F16_tool8
    add(f16_tool8.part, mode=Mode.SUBTRACT)


with BuildPart() as f16_tool14:
    # F16_s15 → F16_t16 (new body)
    with BuildSketch(Plane(origin=(-25.8676002856, 0, 55.0761279539), x_dir=(0, 1, 0), z_dir=(0.4251164085, 0, -0.9051386851))):
        Polygon((-7.62, -12.1628919509), (-2.54, -17.2428919509), (-7.62, -17.2428919509), align=None)
    extrude(amount=F16_T16_DEPTH)

    split(bisect_by=Plane(origin=(-5.5045520136, 6.0814459754, 2.5853224715), x_dir=(0.741396788, 0.6710669138, 0), z_dir=(0.6400297021, -0.7071067812, -0.3006026952)), keep=Keep.TOP)

    split(bisect_by=Plane(origin=(-8.9531304038, -9.8914459754, 4.2050159878), x_dir=(0.741396788, -0.6710669138, 0), z_dir=(-0.6400297021, -0.7071067812, 0.3006026952)), keep=Keep.TOP)


with BuildPart() as f1_15:
    add(f1_14.part)

    # F16_t13: cut F16_tool14
    add(f16_tool14.part, mode=Mode.SUBTRACT)

    # F17: chamfer of 5.08 on 1 edges, made by hand


with BuildPart() as f17_tool2:
    # F17_s3 → F17_t4 (new body)
    with BuildSketch(Plane(origin=(4.9171926996, 0, -10.4694649409), x_dir=(0, 1, 0), z_dir=(-0.4251164085, 0, 0.9051386851))):
        Polygon((-5.08, 17.2428919509), (0, 12.1628919509), (0, 17.2428919509), align=None)
    extrude(amount=F17_T4_DEPTH)

    split(bisect_by=Plane(origin=(-5.5045520136, 6.0814459754, 2.5853224715), x_dir=(-0.741396788, -0.6710669138, 0), z_dir=(-0.6400297021, 0.7071067812, 0.3006026952)), keep=Keep.TOP)


with BuildPart() as f1_16:
    add(f1_15.part)

    # F17_t1: cut F17_tool2
    add(f17_tool2.part, mode=Mode.SUBTRACT)

    # F18: chamfer of 5.08 on 1 edges, made by hand


with BuildPart() as f18_tool2:
    # F18_s3 → F18_t4 (new body)
    with BuildSketch(Plane(origin=(10.469464941, 0, -4.9171926996), x_dir=(0, 1, 0), z_dir=(-0.9051386851, 0, 0.4251164085))):
        Polygon((-2.54, -17.2428919509), (-7.62, -12.1628919509), (-7.62, -17.2428919509), align=None)
    extrude(amount=F18_T4_DEPTH)

    split(bisect_by=Plane(origin=(-4.2050159878, -9.8914459754, 8.9531304038), x_dir=(0.9202923495, -0.3912313784, 0), z_dir=(-0.3006026952, -0.7071067812, 0.6400297021)), keep=Keep.TOP)

    split(bisect_by=Plane(origin=(-2.5853224715, 6.0814459755, 5.5045520136), x_dir=(0.9202923495, 0.3912313784, 0), z_dir=(0.3006026952, -0.7071067812, -0.6400297021)), keep=Keep.TOP)


with BuildPart() as f1_17:
    add(f1_16.part)

    # F18_t1: cut F18_tool2
    add(f18_tool2.part, mode=Mode.SUBTRACT)


with BuildPart() as f18_tool8:
    # F18_s9 → F18_t10 (new body)
    with BuildSketch(Plane(origin=(10.469464941, 0, -4.9171926996), x_dir=(0, 1, 0), z_dir=(-0.9051386851, 0, 0.4251164085))):
        Polygon((-2.54, -17.2428919509), (-7.62, -12.1628919509), (-7.62, -17.2428919509), align=None)
    extrude(amount=F18_T10_DEPTH)

    split(bisect_by=Plane(origin=(-4.2050159878, -9.8914459754, 8.9531304038), x_dir=(-0.9202923495, 0.3912313784, 0), z_dir=(0.3006026952, 0.7071067812, -0.6400297021)), keep=Keep.TOP)

    split(bisect_by=Plane(origin=(-2.5853224715, 6.0814459755, 5.5045520136), x_dir=(-0.9202923495, -0.3912313784, 0), z_dir=(-0.3006026952, 0.7071067812, 0.6400297021)), keep=Keep.TOP)


with BuildPart() as f1_18:
    add(f1_17.part)

    # F18_t7: cut F18_tool8
    add(f18_tool8.part, mode=Mode.SUBTRACT)


with BuildPart() as f18_tool14:
    # F18_s15 → F18_t16 (new body)
    with BuildSketch(Plane(origin=(10.469464941, 0, -4.9171926996), x_dir=(0, 1, 0), z_dir=(-0.9051386851, 0, 0.4251164085))):
        Polygon((-2.54, -17.2428919509), (-7.62, -12.1628919509), (-7.62, -17.2428919509), align=None)
    extrude(amount=F18_T16_DEPTH)

    split(bisect_by=Plane(origin=(-4.2050159878, -9.8914459754, 8.9531304038), x_dir=(0.9202923495, -0.3912313784, 0), z_dir=(-0.3006026952, -0.7071067812, 0.6400297021)), keep=Keep.TOP)

    split(bisect_by=Plane(origin=(-2.5853224715, 6.0814459755, 5.5045520136), x_dir=(-0.9202923495, -0.3912313784, 0), z_dir=(-0.3006026952, 0.7071067812, 0.6400297021)), keep=Keep.TOP)


with BuildPart() as f1_19:
    add(f1_18.part)

    # F18_t13: cut F18_tool14
    add(f18_tool14.part, mode=Mode.SUBTRACT)

    # F19: chamfer of 5.08 on 1 edges, made by hand


with BuildPart() as f19_tool2:
    # F19_s3 → F19_t4 (new body)
    with BuildSketch(Plane(origin=(10.4694649409, 0, -4.9171926996), x_dir=(0, 1, 0), z_dir=(-0.9051386851, 0, 0.4251164085))):
        Polygon((-5.08, -17.2428919509), (0, -12.1628919509), (0, -17.2428919509), align=None)
    extrude(amount=F19_T4_DEPTH)

    split(bisect_by=Plane(origin=(-2.5853224715, 6.0814459755, 5.5045520136), x_dir=(-0.9202923495, -0.3912313784, 0), z_dir=(-0.3006026952, 0.7071067812, 0.6400297021)), keep=Keep.TOP)


with BuildPart() as f1_20:
    add(f1_19.part)

    # F19_t1: cut F19_tool2
    add(f19_tool2.part, mode=Mode.SUBTRACT)


solid = f1_20.part
